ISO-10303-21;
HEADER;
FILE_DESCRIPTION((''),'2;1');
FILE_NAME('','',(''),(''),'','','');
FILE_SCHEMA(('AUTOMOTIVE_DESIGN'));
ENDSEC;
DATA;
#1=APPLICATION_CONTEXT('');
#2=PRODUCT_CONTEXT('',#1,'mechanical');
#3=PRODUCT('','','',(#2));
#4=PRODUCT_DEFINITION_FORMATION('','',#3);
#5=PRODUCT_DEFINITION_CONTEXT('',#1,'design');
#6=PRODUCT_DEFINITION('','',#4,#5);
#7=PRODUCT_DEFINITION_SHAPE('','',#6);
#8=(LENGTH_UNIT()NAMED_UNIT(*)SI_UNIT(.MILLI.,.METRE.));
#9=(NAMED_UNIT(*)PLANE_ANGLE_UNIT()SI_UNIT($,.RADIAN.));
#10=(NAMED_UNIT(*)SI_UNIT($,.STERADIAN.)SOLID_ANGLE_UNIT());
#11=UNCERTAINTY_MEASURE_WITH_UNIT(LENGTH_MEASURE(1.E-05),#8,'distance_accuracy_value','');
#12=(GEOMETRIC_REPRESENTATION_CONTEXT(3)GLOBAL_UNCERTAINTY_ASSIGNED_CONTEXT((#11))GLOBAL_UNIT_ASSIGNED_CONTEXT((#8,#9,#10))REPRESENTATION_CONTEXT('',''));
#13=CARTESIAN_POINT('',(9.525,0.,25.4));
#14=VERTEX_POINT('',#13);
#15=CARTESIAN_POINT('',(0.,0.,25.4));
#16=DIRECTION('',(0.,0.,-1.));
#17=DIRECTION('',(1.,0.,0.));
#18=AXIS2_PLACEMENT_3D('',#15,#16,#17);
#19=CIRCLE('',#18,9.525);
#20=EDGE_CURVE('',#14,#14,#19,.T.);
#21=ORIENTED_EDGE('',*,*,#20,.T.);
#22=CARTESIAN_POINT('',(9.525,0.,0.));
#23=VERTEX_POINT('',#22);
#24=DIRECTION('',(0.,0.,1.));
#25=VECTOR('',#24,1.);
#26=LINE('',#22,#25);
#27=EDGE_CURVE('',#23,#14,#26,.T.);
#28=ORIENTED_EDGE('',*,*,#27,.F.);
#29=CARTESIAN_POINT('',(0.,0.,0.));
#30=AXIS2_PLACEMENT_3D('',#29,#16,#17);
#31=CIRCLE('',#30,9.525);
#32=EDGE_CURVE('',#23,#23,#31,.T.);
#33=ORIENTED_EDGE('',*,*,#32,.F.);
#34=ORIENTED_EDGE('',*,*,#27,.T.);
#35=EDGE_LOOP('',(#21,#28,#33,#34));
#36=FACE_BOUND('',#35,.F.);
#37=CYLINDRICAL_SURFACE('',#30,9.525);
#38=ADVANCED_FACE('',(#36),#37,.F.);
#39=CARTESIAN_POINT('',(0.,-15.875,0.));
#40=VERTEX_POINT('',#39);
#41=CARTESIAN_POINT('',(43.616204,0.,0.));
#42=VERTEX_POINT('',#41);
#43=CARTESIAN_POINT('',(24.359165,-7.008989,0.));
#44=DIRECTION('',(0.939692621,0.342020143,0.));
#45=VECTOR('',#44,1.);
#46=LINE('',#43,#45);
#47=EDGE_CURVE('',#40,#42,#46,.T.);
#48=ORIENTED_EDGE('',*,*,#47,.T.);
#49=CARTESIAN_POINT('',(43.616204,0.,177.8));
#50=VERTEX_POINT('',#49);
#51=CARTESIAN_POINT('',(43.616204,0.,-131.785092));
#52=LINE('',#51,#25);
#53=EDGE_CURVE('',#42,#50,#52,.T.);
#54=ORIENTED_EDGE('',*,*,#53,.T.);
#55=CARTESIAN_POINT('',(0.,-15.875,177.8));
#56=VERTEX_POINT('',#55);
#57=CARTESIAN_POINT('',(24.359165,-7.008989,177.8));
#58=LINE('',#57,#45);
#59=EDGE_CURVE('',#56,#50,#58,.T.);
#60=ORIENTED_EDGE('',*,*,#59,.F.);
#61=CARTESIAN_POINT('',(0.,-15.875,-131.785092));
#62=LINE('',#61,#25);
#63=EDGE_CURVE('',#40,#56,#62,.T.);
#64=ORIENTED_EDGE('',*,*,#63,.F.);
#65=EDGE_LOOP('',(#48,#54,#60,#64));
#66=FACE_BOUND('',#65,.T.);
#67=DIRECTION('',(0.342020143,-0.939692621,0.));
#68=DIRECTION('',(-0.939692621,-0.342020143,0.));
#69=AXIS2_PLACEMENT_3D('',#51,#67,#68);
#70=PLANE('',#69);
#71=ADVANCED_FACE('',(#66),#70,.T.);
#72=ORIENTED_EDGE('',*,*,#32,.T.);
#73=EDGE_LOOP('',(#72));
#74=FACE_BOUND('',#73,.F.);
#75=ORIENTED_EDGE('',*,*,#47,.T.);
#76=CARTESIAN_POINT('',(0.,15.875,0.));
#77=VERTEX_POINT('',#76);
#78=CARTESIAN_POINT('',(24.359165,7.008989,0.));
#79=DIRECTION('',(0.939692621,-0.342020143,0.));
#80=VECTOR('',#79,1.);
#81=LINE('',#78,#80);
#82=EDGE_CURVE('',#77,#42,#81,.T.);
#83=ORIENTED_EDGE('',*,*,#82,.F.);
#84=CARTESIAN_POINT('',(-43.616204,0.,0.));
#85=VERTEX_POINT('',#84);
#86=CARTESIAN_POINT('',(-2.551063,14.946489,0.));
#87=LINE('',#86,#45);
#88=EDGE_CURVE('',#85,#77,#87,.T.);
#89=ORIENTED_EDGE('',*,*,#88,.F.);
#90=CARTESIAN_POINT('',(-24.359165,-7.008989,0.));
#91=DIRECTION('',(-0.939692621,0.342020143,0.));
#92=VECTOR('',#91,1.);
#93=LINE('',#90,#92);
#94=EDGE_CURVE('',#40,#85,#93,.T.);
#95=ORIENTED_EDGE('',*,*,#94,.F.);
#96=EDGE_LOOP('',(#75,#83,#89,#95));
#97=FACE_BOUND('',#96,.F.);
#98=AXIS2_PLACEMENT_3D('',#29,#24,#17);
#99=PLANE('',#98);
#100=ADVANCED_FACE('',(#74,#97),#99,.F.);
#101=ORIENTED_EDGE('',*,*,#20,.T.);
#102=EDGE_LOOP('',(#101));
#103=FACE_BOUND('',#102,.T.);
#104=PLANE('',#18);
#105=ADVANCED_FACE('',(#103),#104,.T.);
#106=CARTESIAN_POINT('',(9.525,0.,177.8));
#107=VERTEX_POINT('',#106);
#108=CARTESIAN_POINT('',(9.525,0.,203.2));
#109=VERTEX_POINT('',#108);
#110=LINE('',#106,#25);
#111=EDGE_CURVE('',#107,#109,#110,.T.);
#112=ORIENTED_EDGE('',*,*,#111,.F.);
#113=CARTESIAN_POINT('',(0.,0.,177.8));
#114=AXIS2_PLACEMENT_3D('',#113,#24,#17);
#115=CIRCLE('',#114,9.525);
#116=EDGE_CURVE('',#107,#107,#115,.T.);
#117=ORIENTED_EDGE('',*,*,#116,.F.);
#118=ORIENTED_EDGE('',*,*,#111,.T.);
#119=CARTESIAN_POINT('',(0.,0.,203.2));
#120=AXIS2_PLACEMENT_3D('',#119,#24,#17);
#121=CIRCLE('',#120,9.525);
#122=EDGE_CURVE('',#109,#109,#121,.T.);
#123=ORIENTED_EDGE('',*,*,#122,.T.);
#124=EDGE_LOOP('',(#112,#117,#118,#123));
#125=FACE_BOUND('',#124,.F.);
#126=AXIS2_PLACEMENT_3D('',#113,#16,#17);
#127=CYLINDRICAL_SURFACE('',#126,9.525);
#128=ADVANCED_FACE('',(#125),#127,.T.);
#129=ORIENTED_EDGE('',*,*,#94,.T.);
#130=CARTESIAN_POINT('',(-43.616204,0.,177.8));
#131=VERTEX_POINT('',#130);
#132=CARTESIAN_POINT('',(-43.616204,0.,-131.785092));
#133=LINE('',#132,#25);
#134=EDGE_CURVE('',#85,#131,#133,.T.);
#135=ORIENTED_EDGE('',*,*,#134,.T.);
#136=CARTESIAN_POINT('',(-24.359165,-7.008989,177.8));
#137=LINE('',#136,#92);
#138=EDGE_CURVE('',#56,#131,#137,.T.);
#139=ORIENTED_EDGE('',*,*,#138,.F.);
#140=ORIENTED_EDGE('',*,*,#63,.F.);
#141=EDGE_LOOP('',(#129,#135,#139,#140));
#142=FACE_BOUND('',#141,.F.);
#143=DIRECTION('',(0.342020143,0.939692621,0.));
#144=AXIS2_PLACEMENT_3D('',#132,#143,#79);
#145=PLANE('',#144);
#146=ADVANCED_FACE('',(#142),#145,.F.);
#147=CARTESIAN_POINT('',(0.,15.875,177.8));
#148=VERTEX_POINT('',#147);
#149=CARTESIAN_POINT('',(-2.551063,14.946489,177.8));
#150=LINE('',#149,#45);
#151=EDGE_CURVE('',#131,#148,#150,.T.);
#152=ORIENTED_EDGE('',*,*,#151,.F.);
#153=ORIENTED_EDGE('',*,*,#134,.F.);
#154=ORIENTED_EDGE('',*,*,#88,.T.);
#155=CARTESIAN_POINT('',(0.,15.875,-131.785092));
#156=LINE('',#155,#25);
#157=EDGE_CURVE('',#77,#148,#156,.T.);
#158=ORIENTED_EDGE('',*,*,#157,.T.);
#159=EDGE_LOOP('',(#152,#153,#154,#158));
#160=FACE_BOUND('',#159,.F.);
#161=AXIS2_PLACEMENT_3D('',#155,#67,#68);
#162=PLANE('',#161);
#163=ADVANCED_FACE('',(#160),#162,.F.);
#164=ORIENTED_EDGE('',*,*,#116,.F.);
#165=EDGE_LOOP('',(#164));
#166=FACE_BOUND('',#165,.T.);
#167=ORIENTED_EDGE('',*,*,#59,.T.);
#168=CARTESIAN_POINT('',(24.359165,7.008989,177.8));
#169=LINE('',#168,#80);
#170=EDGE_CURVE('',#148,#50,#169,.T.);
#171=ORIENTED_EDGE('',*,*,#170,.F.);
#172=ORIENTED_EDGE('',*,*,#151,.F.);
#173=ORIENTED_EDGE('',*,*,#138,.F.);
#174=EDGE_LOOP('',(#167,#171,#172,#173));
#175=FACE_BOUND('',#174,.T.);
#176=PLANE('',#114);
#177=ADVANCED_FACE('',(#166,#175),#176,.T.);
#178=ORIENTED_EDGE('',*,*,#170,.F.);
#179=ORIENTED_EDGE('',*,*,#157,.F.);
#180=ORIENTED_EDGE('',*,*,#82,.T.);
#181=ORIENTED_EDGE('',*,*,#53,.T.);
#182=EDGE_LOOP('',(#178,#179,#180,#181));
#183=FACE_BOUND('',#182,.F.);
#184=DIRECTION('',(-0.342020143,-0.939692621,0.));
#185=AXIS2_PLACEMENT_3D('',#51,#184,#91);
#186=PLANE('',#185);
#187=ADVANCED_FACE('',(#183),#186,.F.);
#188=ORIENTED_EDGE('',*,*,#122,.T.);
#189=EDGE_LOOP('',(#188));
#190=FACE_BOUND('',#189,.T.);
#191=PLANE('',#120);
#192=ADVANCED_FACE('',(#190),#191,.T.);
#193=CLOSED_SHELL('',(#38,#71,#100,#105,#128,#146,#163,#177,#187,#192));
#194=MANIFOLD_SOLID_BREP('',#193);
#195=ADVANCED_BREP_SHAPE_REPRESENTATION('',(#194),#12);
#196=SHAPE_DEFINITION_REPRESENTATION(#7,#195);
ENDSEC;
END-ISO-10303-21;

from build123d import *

# Parameters (mm, degrees)
F0_W        = 101.6
F0_H        = 31.75
F1_DEPTH    = 177.8
F2_T1_DEPTH = 441.3701848271
F3_R        = 9.525
F4_DEPTH    = 25.4
F5_R        = 9.525
F6_DEPTH    = 25.4


# Not quite as in the source:
# - a fillet or chamfer that OpenCascade refuses, or shapes differently, is made with other operations: its cross-section is extruded or revolved along the edge and cut away or added


with BuildPart() as f1:
    # F0 (on Top) → F1 (new body)
    with BuildSketch(Plane.XY):
        Rectangle(F0_W, F0_H)
    extrude(amount=F1_DEPTH)

    # F2: chamfer of 50.8 x 18.4896879007 on 4 edges, made by hand

    # F2_s2 → F2_t1 (cut)
    with BuildSketch(Plane.XY.offset(-131.7850924136)):
        Polygon((50.8, -2.6146879007), (0, 15.875), (50.8, 15.875), align=None)
        Polygon((50.8, 2.6146879007), (0, -15.875), (50.8, -15.875), align=None)
        Polygon((-50.8, 2.6146879007), (0, -15.875), (-50.8, -15.875), align=None)
        Polygon((0, 15.875), (-50.8, -2.6146879007), (-50.8, 15.875), align=None)
    extrude(amount=F2_T1_DEPTH, mode=Mode.SUBTRACT)

    # F3 (on face) → F4 (join)
    with BuildSketch(Plane.XY.offset(177.8)):
        Circle(F3_R)
    extrude(amount=F4_DEPTH)

    # F5 (on face) → F6 (cut)
    with BuildSketch(Plane(origin=(0, 0, 0), x_dir=(1, 0, 0), z_dir=(0, 0, -1))):
        Circle(F5_R)
    extrude(amount=-F6_DEPTH, mode=Mode.SUBTRACT)


solid = f1.part
